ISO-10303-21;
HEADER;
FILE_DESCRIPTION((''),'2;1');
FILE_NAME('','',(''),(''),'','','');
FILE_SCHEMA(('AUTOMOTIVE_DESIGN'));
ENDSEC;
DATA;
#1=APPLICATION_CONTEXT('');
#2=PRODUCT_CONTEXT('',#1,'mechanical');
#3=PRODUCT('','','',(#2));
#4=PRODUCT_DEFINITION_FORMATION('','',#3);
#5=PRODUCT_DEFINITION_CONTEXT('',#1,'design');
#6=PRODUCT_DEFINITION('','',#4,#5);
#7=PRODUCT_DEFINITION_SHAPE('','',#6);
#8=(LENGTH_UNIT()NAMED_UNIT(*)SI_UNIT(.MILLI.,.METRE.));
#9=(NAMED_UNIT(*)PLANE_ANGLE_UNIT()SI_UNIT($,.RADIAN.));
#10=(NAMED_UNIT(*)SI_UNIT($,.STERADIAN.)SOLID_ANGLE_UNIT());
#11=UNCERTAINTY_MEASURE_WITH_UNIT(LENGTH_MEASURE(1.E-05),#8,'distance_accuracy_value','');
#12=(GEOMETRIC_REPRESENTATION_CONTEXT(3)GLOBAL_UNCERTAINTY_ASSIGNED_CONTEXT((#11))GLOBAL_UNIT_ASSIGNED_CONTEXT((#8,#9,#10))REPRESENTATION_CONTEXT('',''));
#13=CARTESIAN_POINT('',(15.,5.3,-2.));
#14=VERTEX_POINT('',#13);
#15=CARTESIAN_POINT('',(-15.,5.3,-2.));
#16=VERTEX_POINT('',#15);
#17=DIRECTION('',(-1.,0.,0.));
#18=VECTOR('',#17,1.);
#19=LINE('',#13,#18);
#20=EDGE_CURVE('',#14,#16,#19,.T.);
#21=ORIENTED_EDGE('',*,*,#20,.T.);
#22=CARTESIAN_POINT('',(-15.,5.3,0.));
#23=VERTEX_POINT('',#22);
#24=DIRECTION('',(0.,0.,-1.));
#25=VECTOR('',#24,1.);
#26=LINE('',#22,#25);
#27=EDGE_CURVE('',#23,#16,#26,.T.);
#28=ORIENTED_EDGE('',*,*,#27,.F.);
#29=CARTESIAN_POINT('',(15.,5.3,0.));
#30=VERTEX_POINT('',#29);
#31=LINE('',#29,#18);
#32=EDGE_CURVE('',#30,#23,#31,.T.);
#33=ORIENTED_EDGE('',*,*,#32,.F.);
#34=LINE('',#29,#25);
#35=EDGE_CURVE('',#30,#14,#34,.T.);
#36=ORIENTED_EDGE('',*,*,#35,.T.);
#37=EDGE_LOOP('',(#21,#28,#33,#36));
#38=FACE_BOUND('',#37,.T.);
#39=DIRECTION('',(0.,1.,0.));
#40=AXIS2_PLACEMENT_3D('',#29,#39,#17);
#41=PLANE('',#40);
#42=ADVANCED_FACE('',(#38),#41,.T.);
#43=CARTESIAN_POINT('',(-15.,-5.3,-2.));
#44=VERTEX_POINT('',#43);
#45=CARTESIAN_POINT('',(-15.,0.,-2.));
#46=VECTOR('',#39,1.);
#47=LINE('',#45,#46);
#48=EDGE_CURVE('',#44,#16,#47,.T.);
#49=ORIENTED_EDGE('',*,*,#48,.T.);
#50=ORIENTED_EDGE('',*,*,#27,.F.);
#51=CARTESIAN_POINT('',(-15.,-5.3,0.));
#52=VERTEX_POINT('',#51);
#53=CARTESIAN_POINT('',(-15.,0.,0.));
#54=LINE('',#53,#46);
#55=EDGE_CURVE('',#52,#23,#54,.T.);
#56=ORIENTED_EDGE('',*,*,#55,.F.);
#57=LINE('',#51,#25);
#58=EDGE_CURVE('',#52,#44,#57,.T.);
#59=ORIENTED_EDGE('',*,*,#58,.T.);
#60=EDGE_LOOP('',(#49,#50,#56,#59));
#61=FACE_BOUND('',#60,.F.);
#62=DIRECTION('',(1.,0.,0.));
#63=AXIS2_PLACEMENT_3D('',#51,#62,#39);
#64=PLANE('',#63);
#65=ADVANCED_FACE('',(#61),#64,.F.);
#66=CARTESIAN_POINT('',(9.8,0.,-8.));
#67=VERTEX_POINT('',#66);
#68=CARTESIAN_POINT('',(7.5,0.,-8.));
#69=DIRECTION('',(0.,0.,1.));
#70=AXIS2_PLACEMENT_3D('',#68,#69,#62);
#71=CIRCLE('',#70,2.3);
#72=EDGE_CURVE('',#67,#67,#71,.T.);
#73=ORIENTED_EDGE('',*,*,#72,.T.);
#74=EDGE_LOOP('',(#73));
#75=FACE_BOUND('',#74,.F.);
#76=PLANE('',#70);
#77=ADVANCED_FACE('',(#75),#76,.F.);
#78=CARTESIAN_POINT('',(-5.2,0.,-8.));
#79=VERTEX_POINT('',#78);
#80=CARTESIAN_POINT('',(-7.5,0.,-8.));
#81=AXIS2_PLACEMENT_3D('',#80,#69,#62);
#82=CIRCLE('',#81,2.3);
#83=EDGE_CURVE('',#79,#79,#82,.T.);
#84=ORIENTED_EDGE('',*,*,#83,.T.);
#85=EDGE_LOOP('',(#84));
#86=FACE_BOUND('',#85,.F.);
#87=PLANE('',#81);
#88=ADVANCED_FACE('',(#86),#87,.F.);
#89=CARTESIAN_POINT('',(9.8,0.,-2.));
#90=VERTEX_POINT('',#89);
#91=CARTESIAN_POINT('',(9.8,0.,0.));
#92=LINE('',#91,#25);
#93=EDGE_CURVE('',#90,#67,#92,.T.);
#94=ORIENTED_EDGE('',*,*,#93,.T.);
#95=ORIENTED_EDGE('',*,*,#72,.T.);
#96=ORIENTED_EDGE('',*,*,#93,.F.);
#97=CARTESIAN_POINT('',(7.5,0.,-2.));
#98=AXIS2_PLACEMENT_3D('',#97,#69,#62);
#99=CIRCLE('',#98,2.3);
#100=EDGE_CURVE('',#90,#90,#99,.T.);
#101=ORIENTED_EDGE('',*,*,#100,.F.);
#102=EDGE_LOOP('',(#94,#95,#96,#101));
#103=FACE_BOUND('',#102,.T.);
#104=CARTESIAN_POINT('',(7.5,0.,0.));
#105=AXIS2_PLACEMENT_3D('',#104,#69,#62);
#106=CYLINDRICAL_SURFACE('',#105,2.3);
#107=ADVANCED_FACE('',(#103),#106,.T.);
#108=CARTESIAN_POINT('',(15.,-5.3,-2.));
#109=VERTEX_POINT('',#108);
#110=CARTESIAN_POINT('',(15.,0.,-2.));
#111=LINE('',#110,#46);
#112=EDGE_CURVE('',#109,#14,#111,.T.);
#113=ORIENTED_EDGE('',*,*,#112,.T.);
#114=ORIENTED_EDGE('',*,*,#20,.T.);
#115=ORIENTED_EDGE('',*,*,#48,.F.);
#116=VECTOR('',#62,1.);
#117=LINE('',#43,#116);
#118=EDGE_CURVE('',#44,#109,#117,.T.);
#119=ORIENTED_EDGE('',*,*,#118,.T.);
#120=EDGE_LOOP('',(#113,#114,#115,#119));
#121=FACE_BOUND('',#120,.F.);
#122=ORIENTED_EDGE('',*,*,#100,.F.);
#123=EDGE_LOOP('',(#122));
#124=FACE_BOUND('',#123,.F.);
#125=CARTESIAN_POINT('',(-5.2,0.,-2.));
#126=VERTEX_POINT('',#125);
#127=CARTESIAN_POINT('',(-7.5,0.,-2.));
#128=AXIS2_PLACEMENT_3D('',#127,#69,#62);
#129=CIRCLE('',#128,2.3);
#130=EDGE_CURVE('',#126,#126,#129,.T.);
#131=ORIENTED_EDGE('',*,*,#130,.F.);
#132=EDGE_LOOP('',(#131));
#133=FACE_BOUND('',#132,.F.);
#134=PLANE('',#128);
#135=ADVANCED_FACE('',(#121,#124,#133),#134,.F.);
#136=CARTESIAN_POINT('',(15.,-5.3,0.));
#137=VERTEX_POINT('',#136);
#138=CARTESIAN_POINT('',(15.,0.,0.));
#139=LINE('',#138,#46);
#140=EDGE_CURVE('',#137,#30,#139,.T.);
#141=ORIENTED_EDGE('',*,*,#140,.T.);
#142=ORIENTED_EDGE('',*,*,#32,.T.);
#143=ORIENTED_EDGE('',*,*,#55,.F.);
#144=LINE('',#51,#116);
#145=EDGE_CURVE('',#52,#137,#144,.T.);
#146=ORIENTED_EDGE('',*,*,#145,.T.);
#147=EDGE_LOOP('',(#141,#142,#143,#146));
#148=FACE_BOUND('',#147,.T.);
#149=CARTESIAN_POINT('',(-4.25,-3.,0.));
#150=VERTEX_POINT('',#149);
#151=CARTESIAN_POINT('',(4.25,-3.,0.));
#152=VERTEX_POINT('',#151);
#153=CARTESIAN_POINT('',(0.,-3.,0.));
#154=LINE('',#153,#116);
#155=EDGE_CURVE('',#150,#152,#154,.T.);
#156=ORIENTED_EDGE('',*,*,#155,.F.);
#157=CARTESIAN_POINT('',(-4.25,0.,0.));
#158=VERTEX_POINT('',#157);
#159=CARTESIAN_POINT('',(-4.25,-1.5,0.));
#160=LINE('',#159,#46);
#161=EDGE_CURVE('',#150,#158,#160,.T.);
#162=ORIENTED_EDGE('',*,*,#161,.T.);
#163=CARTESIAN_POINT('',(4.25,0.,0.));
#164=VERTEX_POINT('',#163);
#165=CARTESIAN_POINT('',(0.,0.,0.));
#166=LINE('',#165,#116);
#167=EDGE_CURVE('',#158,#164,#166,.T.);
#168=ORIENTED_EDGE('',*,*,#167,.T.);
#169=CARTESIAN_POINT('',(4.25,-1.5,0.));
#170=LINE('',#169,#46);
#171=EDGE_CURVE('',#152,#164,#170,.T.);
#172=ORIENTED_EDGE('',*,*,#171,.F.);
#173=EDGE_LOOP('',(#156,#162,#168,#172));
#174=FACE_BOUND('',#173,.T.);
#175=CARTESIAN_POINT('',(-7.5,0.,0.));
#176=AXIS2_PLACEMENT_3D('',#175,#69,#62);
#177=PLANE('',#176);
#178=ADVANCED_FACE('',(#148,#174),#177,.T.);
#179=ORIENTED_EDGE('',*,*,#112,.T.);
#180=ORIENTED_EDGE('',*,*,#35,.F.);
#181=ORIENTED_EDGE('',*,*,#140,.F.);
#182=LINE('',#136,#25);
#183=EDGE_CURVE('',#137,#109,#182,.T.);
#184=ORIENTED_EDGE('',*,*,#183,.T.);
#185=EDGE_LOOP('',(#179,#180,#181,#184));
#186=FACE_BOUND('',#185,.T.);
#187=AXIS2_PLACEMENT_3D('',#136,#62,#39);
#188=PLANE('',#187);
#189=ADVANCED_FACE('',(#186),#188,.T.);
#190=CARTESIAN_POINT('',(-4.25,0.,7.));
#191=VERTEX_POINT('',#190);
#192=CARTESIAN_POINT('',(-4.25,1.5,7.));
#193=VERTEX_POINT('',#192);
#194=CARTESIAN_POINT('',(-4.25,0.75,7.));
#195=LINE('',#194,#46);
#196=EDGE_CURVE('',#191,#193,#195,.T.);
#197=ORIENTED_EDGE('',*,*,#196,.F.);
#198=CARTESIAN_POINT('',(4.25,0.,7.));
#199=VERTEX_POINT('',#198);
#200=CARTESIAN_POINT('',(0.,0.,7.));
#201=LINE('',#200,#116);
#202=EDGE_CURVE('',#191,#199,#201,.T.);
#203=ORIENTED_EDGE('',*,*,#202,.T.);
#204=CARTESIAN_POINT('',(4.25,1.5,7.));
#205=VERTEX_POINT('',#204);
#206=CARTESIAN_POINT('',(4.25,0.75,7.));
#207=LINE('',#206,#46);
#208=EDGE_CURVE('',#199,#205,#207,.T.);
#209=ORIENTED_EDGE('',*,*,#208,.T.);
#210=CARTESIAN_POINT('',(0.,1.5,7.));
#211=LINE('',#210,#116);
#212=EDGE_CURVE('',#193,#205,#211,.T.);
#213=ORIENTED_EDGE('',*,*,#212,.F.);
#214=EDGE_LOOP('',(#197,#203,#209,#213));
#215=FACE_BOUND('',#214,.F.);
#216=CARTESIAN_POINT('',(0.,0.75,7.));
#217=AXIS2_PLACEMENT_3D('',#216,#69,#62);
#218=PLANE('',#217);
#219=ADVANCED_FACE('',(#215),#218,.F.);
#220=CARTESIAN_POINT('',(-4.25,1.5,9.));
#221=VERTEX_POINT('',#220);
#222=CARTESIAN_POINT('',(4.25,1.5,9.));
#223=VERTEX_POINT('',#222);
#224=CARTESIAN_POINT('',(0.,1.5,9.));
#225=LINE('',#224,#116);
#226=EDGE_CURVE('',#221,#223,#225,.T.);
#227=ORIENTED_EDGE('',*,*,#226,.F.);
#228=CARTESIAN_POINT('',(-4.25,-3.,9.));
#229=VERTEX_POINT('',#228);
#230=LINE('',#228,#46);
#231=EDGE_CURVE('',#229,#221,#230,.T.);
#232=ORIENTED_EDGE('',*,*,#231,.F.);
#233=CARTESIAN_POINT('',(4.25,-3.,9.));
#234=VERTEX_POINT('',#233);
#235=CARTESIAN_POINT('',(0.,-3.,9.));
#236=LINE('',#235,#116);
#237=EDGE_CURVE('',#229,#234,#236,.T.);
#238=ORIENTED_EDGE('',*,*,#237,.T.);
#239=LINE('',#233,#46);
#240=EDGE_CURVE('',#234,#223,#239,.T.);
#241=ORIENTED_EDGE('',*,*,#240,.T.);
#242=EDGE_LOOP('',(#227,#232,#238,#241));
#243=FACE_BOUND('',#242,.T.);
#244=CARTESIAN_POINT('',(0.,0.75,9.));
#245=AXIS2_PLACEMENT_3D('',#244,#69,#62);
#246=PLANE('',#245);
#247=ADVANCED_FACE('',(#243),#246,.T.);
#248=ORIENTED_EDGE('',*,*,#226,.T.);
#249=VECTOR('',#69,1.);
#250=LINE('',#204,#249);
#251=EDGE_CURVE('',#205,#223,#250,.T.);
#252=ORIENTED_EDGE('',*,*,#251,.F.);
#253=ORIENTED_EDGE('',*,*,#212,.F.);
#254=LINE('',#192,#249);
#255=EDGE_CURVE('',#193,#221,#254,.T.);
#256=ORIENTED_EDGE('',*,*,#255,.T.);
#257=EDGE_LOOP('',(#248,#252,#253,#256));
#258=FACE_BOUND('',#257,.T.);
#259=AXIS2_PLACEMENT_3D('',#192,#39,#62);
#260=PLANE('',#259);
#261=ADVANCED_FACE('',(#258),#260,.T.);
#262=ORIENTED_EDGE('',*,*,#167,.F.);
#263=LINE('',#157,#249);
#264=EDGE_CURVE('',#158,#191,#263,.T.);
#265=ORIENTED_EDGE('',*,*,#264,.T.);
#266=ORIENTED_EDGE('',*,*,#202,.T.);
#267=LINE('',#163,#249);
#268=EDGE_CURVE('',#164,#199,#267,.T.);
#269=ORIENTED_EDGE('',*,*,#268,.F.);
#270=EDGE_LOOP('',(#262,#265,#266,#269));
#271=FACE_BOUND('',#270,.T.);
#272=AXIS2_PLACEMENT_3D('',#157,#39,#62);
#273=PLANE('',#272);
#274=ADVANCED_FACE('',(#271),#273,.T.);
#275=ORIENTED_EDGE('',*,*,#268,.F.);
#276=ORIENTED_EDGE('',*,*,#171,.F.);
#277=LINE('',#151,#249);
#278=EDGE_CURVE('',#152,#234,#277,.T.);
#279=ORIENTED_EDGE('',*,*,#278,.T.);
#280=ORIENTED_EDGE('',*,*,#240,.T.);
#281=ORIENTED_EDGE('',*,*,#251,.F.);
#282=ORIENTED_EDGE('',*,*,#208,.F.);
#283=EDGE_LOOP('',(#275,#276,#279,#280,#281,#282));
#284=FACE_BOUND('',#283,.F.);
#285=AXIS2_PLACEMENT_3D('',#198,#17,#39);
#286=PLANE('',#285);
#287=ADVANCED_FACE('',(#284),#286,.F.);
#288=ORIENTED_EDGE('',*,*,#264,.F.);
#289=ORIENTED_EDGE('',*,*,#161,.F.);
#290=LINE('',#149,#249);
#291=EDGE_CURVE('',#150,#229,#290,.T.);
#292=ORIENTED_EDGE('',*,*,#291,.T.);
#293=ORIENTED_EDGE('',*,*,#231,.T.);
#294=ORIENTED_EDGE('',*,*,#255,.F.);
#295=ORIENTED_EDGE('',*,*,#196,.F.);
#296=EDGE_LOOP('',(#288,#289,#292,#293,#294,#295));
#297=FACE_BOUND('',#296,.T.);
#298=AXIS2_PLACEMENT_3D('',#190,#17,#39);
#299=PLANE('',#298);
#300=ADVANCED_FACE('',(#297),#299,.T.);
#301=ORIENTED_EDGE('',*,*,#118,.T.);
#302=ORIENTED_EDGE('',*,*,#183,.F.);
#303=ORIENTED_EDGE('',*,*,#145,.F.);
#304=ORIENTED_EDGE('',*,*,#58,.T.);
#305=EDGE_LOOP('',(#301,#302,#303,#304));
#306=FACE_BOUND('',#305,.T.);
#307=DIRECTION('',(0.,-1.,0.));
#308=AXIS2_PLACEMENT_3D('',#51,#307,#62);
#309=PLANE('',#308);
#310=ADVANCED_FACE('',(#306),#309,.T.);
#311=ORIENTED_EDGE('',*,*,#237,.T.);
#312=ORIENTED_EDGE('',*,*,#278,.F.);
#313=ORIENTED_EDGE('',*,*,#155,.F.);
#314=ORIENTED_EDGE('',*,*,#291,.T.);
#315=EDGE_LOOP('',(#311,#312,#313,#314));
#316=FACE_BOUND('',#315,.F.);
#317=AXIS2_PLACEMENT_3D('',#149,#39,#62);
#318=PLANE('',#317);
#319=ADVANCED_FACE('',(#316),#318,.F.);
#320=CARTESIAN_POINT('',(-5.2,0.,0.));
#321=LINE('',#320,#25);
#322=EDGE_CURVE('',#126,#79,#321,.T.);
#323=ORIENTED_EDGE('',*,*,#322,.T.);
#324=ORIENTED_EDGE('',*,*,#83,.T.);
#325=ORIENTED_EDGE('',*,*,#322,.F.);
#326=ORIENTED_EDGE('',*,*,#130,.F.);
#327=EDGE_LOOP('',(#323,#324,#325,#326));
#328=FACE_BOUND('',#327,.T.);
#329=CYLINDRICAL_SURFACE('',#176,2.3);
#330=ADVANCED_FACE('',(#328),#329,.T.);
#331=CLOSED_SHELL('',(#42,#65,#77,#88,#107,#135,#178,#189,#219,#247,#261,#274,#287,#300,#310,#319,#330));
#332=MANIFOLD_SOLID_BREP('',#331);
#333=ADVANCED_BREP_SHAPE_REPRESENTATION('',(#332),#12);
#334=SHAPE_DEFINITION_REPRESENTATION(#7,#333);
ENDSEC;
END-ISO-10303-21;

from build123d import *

# Parameters (mm, degrees)
F0_W     = 15
F0_H     = 10.6
F0_R     = 2.3
F1_DEPTH = 2
F2_DEPTH = 8
F3_W     = 8.5
F3_H     = 3
F4_DEPTH = 9
F5_START = 7
F3_H_2   = 1.5
F5_DEPTH = 2


# Not quite as in the source:
# - a feature names something its author has since deleted; it is built from what else it names


with BuildPart() as f1:
    # F0 (on Top) → F1 (new body)
    with BuildSketch(Plane.XY):
        with Locations((-7.5, 0)):
            Rectangle(F0_W, F0_H)
        with Locations((-7.5, 0)):
            Circle(F0_R, mode=Mode.SUBTRACT)
        with Locations((7.5, 0)):
            Rectangle(F0_W, F0_H)
        with Locations((7.5, 0)):
            Circle(F0_R, mode=Mode.SUBTRACT)
    extrude(amount=-F1_DEPTH)

    # F0 (on Top) → F2 (join)
    with BuildSketch(Plane.XY):
        with Locations((-7.5, 0)):
            Circle(F0_R)
        with Locations((7.5, 0)):
            Circle(F0_R)
    extrude(amount=-F2_DEPTH)

    # F3 (on Top) → F4 (join)
    with BuildSketch(Plane.XY):
        with Locations((0, -1.5)):
            Rectangle(F3_W, F3_H)
    extrude(amount=F4_DEPTH)

    # F3 (on Top) → F5 (join)
    with BuildSketch(Plane.XY.offset(F5_START)):
        with Locations((0, 0.75)):
            Rectangle(F3_W, F3_H_2)
    extrude(amount=F5_DEPTH)


solid = f1.part
